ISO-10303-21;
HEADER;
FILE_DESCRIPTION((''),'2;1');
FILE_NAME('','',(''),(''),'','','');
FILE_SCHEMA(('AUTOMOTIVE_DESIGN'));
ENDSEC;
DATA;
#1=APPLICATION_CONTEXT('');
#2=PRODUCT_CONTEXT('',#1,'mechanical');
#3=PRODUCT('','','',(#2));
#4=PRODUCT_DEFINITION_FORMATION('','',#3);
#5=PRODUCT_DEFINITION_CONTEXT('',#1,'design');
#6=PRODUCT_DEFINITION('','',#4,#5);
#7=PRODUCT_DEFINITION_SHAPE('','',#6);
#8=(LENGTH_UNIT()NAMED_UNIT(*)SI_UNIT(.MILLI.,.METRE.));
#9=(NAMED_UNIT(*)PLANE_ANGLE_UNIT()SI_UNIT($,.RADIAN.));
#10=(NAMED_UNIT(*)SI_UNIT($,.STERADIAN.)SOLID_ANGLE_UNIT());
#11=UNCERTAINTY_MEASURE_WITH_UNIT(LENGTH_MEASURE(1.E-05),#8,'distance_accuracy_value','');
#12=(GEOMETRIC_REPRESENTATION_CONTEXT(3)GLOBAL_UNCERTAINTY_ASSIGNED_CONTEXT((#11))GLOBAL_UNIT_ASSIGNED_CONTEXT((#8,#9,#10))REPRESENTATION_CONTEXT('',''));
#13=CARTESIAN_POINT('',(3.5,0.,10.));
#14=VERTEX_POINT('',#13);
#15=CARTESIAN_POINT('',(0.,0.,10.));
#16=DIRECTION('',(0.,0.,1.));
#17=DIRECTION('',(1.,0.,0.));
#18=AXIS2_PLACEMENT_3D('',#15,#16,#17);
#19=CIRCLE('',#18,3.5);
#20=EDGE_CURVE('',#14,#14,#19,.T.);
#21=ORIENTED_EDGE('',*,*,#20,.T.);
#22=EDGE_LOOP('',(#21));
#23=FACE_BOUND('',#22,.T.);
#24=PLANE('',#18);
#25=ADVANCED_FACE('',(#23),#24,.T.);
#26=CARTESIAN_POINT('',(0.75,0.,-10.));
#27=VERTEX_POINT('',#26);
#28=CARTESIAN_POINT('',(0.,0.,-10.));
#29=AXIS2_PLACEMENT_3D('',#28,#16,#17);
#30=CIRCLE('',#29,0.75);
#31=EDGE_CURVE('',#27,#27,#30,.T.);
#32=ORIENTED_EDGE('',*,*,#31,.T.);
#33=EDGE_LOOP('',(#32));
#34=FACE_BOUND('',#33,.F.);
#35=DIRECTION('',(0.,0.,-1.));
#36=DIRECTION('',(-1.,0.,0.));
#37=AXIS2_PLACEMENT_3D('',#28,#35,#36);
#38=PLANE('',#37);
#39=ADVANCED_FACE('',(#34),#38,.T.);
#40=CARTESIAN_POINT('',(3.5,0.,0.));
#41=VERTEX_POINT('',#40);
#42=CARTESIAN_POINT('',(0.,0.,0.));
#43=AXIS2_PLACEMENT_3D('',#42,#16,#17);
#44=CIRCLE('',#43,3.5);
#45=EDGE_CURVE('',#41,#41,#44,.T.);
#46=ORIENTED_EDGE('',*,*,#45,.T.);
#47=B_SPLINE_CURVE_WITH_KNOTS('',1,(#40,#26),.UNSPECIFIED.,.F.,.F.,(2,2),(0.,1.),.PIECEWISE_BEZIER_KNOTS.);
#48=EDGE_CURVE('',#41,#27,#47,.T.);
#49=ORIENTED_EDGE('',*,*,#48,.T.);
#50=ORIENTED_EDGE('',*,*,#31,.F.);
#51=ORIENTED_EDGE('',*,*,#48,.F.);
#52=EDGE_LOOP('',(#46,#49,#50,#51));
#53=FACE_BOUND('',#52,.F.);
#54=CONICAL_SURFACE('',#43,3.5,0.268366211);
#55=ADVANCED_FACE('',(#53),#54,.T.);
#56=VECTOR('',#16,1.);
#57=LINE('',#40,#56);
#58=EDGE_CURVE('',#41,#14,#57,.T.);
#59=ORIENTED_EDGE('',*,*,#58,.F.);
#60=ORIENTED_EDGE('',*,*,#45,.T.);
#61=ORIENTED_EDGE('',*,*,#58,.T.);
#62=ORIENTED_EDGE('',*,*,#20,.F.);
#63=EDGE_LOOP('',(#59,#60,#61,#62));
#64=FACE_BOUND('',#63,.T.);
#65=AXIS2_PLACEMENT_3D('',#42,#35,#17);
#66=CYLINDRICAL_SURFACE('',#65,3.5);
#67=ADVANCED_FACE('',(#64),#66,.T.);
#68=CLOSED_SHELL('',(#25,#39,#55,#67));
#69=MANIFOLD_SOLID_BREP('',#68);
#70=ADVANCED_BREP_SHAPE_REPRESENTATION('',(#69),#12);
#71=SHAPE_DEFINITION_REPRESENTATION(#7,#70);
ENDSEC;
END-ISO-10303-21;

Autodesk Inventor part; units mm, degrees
ref_plane "YZ Plane" through (0, 0, 0) normal (1, 0, 0) x (0, 1, 0)
ref_plane "XZ Plane" through (0, 0, 0) normal (0, 1, 0) x (-1, 0, 0)
sketch "Sketch1" plane through (0, 0, 0) normal (0, 0, 1) x (1, 0, 0)
  circle A0 centre (0, 0) radius 3.5
  dimension "d0" = 7
extrude "Extrusion1" add sketch "Sketch1" along normal blind 10
ref_plane "Work Plane1" through (0, 0, -10) normal (0, 0, -1) x (-1, 0, 0)
sketch "Sketch2" plane through (0, 0, -10) normal (0, 0, -1) x (-1, 0, 0)
  circle A0 centre (0, 0) radius 0.75
  dimension "d4" = 1.5
loft "Loft1" add profiles "Sketch2" section 1 edges at (-3.5, 0, 0)
properties part number "pin1"
